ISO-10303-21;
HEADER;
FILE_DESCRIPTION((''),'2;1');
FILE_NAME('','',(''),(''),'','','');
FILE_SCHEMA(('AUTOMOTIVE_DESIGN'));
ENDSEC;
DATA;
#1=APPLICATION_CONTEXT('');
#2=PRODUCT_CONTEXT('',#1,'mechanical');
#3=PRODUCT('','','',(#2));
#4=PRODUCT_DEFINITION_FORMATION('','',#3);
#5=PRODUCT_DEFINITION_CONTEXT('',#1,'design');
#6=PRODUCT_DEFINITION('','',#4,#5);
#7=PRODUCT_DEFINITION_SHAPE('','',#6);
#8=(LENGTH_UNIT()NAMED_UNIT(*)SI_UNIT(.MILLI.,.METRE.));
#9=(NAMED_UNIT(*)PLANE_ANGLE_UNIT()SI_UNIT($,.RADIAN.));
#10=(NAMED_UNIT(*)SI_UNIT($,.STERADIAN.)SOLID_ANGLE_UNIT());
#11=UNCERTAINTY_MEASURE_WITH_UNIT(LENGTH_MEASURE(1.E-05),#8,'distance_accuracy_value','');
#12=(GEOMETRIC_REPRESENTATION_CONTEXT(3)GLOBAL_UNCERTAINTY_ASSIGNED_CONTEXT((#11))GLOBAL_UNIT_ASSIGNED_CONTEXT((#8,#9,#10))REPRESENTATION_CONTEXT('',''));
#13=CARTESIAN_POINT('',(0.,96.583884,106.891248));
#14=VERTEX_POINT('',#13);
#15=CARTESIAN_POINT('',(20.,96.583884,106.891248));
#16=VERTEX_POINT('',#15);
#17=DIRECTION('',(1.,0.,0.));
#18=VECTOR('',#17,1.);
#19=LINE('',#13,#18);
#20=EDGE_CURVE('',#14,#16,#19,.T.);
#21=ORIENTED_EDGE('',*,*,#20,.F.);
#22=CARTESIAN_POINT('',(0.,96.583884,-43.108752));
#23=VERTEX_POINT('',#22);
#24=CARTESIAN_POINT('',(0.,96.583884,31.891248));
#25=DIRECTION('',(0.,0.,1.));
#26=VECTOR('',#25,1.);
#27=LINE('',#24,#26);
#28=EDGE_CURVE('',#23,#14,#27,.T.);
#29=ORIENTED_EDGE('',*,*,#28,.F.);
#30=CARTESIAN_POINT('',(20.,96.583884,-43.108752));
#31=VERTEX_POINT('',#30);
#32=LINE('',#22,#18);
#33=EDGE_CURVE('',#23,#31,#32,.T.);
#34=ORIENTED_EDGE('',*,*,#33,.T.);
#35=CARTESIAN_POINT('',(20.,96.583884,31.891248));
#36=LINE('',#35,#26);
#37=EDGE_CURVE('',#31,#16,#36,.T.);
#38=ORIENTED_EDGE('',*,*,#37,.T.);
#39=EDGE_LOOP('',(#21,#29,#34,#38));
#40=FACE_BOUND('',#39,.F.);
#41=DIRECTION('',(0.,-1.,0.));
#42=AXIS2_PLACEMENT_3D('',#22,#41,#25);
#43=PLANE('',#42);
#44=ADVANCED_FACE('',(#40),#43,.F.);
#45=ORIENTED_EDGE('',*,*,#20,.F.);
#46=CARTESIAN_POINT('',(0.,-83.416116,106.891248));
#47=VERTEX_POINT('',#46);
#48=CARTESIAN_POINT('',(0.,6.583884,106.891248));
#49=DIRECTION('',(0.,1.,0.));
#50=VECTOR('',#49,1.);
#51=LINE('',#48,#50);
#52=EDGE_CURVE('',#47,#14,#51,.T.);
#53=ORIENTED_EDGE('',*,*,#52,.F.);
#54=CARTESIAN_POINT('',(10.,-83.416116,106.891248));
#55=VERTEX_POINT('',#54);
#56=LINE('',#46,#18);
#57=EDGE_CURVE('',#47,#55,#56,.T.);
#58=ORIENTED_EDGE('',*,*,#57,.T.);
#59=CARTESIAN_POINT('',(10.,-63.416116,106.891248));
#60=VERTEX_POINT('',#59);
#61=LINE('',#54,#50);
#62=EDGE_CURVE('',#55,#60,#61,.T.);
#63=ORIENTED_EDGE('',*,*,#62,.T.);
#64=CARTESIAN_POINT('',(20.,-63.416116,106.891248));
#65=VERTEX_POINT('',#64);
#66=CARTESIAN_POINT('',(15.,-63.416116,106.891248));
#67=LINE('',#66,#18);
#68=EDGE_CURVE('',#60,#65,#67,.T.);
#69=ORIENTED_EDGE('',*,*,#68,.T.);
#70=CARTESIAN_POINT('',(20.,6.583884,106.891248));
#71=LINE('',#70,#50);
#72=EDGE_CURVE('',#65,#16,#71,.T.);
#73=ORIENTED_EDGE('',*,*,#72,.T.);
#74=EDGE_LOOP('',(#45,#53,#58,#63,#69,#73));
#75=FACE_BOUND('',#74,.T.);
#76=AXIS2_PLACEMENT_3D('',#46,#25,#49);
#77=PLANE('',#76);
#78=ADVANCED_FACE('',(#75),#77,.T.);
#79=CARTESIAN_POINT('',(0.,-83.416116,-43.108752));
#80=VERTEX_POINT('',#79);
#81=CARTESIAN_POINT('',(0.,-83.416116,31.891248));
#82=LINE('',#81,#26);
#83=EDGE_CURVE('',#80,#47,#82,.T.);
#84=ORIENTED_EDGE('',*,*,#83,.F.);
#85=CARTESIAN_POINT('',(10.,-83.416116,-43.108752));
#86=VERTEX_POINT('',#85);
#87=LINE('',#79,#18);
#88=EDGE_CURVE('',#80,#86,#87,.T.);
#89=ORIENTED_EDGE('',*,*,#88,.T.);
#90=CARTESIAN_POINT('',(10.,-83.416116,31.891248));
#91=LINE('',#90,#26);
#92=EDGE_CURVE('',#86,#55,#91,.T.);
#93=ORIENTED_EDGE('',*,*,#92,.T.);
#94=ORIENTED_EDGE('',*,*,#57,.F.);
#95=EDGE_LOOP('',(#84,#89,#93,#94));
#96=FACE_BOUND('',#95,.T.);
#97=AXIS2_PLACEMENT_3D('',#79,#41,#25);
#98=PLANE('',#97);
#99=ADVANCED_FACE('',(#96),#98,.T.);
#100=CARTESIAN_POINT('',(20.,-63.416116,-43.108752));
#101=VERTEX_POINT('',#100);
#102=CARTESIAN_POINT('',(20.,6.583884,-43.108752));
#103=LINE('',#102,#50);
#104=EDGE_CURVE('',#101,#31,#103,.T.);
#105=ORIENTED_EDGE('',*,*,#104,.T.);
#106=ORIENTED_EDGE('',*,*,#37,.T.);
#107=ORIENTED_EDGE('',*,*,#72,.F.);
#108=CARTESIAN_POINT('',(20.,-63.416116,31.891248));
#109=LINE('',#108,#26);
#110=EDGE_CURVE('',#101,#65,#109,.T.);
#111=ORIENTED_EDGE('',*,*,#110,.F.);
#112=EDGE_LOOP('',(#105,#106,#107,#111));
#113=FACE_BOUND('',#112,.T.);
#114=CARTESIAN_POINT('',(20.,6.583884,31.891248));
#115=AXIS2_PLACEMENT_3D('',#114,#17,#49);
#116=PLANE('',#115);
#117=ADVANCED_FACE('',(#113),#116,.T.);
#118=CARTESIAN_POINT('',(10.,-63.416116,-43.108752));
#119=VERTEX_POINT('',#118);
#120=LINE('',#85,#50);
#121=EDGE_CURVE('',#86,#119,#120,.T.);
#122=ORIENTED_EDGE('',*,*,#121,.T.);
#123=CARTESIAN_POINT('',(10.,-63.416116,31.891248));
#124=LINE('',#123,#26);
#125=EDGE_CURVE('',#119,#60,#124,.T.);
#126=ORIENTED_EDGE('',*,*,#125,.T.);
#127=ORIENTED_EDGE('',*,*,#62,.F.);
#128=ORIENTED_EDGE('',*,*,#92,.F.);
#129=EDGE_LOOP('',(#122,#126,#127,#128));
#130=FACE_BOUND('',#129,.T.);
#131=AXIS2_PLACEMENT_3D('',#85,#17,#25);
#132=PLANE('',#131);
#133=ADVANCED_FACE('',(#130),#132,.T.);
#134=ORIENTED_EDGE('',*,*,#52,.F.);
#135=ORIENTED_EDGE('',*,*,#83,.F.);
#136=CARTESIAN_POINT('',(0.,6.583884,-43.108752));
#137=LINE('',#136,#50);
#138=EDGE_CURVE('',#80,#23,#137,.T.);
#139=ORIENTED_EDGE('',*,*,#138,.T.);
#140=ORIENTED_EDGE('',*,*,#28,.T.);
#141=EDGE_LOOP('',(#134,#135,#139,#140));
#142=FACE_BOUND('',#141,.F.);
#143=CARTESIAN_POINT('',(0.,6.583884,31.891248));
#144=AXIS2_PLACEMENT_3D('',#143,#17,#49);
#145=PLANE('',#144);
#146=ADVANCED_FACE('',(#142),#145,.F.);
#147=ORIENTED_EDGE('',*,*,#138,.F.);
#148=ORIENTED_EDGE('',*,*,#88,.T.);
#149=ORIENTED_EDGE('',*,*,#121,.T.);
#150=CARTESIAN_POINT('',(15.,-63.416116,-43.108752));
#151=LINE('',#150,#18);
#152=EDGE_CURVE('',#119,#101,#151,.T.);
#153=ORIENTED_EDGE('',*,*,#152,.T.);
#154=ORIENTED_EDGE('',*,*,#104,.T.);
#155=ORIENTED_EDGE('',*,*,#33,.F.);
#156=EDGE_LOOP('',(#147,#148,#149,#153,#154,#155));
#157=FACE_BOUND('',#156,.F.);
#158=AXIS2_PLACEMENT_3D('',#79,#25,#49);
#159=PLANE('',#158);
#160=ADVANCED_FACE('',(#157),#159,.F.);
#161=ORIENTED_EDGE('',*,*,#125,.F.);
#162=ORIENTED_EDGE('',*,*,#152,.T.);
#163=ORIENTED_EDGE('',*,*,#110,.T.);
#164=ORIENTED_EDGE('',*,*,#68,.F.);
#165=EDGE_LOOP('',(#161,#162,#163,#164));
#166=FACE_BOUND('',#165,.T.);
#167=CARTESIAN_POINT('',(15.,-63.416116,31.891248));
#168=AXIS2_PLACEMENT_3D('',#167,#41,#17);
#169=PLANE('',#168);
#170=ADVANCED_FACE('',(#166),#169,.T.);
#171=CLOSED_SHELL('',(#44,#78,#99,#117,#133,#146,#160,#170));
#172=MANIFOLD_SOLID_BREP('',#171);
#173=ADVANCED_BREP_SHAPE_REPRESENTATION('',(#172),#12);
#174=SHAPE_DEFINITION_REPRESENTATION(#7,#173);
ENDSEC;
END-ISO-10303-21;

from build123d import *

# Parameters (mm, degrees)
F0_W     = 180
F0_H     = 150
F1_DEPTH = 20
F2_W     = 10
F2_H     = 150
F3_DEPTH = 20


# Not quite as in the source:
# - the program builds the solid bodies; features that only make, move or delete a surface that nothing else refers to are left out


with BuildPart() as f1:
    # F0 (on Right) → F1 (new body)
    with BuildSketch(Plane.YZ):
        with Locations((6.5838837624, 31.891247511)):
            Rectangle(F0_W, F0_H)
    extrude(amount=F1_DEPTH)

    # F2 (on face) → F3 (cut)
    with BuildSketch(Plane.XZ.offset(83.4161162376)):
        with Locations((15, 31.891247511)):
            Rectangle(F2_W, F2_H)
    extrude(amount=-F3_DEPTH, mode=Mode.SUBTRACT)


solid = f1.part
